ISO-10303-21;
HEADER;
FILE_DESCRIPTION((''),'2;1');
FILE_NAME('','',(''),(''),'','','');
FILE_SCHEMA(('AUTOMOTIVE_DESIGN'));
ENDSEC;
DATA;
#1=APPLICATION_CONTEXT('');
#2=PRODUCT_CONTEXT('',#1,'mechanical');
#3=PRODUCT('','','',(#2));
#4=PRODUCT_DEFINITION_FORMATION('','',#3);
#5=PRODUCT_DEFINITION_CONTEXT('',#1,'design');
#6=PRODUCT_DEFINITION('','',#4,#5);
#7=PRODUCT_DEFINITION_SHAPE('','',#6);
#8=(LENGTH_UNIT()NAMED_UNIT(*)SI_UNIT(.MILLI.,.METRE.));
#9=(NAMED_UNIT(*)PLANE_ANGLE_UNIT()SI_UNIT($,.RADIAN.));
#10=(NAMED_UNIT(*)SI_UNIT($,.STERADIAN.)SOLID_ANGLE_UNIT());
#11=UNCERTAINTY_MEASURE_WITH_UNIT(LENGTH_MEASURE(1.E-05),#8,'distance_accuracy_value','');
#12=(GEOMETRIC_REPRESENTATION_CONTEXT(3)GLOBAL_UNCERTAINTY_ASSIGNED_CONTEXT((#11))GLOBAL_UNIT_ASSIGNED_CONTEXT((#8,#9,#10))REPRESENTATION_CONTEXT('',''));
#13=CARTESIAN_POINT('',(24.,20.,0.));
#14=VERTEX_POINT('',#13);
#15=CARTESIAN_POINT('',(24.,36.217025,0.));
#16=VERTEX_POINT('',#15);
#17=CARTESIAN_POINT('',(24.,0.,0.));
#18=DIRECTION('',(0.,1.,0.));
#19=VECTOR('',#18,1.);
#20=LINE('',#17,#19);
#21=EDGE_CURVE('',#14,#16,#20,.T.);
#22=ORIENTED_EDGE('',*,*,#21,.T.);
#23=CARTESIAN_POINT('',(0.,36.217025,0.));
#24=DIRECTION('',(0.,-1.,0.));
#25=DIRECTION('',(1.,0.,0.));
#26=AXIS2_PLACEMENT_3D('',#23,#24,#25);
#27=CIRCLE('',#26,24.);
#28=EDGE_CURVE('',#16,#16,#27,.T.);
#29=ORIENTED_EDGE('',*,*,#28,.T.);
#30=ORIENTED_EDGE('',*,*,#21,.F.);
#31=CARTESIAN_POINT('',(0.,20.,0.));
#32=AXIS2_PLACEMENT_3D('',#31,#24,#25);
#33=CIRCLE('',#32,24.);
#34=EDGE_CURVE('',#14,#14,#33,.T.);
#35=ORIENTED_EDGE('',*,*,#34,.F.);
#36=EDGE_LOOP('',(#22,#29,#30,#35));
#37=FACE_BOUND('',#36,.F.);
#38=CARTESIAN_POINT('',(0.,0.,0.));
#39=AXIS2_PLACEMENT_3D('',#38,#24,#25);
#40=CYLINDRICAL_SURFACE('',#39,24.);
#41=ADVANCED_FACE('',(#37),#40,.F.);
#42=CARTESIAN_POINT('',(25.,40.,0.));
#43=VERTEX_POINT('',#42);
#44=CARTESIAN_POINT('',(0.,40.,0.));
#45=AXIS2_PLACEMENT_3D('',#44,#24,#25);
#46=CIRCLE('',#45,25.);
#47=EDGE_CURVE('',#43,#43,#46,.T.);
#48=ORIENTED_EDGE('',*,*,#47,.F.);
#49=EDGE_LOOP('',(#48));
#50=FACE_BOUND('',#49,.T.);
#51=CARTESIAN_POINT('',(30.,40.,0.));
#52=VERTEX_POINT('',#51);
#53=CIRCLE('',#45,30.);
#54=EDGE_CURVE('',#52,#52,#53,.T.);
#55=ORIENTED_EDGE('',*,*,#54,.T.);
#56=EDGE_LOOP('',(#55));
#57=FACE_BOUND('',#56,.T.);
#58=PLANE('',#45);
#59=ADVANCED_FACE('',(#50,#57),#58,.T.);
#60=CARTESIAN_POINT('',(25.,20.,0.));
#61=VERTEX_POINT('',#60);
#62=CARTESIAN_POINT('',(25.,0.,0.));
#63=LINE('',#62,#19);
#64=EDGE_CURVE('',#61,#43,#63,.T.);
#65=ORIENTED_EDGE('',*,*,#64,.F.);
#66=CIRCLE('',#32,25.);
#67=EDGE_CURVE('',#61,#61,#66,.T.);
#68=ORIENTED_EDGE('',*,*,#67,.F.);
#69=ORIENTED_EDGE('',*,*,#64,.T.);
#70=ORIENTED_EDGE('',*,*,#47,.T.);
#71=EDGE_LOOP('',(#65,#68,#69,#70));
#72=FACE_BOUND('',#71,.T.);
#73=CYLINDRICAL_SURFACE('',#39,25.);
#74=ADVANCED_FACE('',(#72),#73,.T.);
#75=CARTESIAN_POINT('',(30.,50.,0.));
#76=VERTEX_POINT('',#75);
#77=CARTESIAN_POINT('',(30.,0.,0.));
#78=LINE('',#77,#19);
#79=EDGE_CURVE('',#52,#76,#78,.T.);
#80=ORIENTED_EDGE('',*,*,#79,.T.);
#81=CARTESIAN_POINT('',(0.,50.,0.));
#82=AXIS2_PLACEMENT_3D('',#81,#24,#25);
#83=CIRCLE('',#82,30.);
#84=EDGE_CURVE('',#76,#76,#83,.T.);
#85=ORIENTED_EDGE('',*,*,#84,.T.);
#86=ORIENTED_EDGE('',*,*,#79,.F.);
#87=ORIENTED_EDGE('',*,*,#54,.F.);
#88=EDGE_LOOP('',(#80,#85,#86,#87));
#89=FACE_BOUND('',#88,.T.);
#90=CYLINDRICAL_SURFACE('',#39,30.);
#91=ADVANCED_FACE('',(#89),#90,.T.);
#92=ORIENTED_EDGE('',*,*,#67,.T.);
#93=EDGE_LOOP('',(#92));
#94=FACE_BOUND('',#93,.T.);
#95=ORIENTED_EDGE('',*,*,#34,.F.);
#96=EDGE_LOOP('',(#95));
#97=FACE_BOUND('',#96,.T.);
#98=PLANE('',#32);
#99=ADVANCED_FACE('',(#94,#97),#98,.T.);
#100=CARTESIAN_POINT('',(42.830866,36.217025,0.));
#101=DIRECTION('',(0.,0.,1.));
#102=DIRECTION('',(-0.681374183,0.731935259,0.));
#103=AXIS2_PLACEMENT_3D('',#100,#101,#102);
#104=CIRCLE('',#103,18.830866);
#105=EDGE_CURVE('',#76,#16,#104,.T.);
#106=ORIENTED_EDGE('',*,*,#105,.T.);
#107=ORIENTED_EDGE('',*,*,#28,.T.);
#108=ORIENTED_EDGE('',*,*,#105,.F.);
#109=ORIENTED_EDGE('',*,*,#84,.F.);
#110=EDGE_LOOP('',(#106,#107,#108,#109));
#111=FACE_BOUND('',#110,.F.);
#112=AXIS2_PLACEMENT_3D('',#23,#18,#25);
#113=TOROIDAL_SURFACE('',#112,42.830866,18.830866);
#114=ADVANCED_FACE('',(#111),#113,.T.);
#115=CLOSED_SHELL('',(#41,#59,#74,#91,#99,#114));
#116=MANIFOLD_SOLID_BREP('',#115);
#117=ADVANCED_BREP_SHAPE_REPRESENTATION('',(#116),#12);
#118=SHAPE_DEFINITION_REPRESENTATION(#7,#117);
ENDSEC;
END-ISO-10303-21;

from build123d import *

# Parameters (mm, degrees)
F0_R     = 30
F1_DEPTH = 50
F2_R     = 30
F2_R_2   = 25
F3_DEPTH = 40
F4_R     = 24
F5_DEPTH = 60
F7_DEPTH = 20


# Not quite as in the source:
# - a fillet or chamfer that OpenCascade refuses, or shapes differently, is made with other operations: its cross-section is extruded or revolved along the edge and cut away or added


with BuildPart() as f1:
    # F0 (on Front) → F1 (new body)
    with BuildSketch(Plane.XZ):
        Circle(F0_R)
    extrude(amount=-F1_DEPTH)

    # F2 (on face) → F3 (cut)
    with BuildSketch(Plane.XZ):
        Circle(F2_R)
        Circle(F2_R_2, mode=Mode.SUBTRACT)
    extrude(amount=-F3_DEPTH, mode=Mode.SUBTRACT)

    # F4 (on face) → F5 (cut)
    with BuildSketch(Plane.XZ):
        Circle(F4_R)
    extrude(amount=-F5_DEPTH, mode=Mode.SUBTRACT)

    # F6: fillet of radius 18.8308657865 on 1 edges, made by hand

    # F6_s1 → F6_t2 (revolve, cut)
    with BuildSketch(Plane.XY):
        with BuildLine():
            ThreePointArc((30, 50), (25.5650351112, 43.7331811345), (24, 36.2170253777))
            Line((24, 36.2170253777), (23.6233826843, 36.2170253777))
            Line((23.6233826843, 36.2170253777), (23.6233826843, 50))
            Line((23.6233826843, 50), (24, 50.3766173157))
            ThreePointArc((24, 50.3766173157), (27, 50.3766173157), (29.7433826843, 50.2756594924))
            Line((29.7433826843, 50.2756594924), (30, 50))
        make_face()
    revolve(axis=Axis((0, 50, 0), (0, -1, 0)), mode=Mode.SUBTRACT)

    # F7 (cut): a face of the model
    f7_faces = [f1.faces().sort_by_distance(p)[0] for p in [
        (-24.2928932188, 0, 0),
    ]]
    extrude(f7_faces, amount=-F7_DEPTH, mode=Mode.SUBTRACT)


solid = f1.part
